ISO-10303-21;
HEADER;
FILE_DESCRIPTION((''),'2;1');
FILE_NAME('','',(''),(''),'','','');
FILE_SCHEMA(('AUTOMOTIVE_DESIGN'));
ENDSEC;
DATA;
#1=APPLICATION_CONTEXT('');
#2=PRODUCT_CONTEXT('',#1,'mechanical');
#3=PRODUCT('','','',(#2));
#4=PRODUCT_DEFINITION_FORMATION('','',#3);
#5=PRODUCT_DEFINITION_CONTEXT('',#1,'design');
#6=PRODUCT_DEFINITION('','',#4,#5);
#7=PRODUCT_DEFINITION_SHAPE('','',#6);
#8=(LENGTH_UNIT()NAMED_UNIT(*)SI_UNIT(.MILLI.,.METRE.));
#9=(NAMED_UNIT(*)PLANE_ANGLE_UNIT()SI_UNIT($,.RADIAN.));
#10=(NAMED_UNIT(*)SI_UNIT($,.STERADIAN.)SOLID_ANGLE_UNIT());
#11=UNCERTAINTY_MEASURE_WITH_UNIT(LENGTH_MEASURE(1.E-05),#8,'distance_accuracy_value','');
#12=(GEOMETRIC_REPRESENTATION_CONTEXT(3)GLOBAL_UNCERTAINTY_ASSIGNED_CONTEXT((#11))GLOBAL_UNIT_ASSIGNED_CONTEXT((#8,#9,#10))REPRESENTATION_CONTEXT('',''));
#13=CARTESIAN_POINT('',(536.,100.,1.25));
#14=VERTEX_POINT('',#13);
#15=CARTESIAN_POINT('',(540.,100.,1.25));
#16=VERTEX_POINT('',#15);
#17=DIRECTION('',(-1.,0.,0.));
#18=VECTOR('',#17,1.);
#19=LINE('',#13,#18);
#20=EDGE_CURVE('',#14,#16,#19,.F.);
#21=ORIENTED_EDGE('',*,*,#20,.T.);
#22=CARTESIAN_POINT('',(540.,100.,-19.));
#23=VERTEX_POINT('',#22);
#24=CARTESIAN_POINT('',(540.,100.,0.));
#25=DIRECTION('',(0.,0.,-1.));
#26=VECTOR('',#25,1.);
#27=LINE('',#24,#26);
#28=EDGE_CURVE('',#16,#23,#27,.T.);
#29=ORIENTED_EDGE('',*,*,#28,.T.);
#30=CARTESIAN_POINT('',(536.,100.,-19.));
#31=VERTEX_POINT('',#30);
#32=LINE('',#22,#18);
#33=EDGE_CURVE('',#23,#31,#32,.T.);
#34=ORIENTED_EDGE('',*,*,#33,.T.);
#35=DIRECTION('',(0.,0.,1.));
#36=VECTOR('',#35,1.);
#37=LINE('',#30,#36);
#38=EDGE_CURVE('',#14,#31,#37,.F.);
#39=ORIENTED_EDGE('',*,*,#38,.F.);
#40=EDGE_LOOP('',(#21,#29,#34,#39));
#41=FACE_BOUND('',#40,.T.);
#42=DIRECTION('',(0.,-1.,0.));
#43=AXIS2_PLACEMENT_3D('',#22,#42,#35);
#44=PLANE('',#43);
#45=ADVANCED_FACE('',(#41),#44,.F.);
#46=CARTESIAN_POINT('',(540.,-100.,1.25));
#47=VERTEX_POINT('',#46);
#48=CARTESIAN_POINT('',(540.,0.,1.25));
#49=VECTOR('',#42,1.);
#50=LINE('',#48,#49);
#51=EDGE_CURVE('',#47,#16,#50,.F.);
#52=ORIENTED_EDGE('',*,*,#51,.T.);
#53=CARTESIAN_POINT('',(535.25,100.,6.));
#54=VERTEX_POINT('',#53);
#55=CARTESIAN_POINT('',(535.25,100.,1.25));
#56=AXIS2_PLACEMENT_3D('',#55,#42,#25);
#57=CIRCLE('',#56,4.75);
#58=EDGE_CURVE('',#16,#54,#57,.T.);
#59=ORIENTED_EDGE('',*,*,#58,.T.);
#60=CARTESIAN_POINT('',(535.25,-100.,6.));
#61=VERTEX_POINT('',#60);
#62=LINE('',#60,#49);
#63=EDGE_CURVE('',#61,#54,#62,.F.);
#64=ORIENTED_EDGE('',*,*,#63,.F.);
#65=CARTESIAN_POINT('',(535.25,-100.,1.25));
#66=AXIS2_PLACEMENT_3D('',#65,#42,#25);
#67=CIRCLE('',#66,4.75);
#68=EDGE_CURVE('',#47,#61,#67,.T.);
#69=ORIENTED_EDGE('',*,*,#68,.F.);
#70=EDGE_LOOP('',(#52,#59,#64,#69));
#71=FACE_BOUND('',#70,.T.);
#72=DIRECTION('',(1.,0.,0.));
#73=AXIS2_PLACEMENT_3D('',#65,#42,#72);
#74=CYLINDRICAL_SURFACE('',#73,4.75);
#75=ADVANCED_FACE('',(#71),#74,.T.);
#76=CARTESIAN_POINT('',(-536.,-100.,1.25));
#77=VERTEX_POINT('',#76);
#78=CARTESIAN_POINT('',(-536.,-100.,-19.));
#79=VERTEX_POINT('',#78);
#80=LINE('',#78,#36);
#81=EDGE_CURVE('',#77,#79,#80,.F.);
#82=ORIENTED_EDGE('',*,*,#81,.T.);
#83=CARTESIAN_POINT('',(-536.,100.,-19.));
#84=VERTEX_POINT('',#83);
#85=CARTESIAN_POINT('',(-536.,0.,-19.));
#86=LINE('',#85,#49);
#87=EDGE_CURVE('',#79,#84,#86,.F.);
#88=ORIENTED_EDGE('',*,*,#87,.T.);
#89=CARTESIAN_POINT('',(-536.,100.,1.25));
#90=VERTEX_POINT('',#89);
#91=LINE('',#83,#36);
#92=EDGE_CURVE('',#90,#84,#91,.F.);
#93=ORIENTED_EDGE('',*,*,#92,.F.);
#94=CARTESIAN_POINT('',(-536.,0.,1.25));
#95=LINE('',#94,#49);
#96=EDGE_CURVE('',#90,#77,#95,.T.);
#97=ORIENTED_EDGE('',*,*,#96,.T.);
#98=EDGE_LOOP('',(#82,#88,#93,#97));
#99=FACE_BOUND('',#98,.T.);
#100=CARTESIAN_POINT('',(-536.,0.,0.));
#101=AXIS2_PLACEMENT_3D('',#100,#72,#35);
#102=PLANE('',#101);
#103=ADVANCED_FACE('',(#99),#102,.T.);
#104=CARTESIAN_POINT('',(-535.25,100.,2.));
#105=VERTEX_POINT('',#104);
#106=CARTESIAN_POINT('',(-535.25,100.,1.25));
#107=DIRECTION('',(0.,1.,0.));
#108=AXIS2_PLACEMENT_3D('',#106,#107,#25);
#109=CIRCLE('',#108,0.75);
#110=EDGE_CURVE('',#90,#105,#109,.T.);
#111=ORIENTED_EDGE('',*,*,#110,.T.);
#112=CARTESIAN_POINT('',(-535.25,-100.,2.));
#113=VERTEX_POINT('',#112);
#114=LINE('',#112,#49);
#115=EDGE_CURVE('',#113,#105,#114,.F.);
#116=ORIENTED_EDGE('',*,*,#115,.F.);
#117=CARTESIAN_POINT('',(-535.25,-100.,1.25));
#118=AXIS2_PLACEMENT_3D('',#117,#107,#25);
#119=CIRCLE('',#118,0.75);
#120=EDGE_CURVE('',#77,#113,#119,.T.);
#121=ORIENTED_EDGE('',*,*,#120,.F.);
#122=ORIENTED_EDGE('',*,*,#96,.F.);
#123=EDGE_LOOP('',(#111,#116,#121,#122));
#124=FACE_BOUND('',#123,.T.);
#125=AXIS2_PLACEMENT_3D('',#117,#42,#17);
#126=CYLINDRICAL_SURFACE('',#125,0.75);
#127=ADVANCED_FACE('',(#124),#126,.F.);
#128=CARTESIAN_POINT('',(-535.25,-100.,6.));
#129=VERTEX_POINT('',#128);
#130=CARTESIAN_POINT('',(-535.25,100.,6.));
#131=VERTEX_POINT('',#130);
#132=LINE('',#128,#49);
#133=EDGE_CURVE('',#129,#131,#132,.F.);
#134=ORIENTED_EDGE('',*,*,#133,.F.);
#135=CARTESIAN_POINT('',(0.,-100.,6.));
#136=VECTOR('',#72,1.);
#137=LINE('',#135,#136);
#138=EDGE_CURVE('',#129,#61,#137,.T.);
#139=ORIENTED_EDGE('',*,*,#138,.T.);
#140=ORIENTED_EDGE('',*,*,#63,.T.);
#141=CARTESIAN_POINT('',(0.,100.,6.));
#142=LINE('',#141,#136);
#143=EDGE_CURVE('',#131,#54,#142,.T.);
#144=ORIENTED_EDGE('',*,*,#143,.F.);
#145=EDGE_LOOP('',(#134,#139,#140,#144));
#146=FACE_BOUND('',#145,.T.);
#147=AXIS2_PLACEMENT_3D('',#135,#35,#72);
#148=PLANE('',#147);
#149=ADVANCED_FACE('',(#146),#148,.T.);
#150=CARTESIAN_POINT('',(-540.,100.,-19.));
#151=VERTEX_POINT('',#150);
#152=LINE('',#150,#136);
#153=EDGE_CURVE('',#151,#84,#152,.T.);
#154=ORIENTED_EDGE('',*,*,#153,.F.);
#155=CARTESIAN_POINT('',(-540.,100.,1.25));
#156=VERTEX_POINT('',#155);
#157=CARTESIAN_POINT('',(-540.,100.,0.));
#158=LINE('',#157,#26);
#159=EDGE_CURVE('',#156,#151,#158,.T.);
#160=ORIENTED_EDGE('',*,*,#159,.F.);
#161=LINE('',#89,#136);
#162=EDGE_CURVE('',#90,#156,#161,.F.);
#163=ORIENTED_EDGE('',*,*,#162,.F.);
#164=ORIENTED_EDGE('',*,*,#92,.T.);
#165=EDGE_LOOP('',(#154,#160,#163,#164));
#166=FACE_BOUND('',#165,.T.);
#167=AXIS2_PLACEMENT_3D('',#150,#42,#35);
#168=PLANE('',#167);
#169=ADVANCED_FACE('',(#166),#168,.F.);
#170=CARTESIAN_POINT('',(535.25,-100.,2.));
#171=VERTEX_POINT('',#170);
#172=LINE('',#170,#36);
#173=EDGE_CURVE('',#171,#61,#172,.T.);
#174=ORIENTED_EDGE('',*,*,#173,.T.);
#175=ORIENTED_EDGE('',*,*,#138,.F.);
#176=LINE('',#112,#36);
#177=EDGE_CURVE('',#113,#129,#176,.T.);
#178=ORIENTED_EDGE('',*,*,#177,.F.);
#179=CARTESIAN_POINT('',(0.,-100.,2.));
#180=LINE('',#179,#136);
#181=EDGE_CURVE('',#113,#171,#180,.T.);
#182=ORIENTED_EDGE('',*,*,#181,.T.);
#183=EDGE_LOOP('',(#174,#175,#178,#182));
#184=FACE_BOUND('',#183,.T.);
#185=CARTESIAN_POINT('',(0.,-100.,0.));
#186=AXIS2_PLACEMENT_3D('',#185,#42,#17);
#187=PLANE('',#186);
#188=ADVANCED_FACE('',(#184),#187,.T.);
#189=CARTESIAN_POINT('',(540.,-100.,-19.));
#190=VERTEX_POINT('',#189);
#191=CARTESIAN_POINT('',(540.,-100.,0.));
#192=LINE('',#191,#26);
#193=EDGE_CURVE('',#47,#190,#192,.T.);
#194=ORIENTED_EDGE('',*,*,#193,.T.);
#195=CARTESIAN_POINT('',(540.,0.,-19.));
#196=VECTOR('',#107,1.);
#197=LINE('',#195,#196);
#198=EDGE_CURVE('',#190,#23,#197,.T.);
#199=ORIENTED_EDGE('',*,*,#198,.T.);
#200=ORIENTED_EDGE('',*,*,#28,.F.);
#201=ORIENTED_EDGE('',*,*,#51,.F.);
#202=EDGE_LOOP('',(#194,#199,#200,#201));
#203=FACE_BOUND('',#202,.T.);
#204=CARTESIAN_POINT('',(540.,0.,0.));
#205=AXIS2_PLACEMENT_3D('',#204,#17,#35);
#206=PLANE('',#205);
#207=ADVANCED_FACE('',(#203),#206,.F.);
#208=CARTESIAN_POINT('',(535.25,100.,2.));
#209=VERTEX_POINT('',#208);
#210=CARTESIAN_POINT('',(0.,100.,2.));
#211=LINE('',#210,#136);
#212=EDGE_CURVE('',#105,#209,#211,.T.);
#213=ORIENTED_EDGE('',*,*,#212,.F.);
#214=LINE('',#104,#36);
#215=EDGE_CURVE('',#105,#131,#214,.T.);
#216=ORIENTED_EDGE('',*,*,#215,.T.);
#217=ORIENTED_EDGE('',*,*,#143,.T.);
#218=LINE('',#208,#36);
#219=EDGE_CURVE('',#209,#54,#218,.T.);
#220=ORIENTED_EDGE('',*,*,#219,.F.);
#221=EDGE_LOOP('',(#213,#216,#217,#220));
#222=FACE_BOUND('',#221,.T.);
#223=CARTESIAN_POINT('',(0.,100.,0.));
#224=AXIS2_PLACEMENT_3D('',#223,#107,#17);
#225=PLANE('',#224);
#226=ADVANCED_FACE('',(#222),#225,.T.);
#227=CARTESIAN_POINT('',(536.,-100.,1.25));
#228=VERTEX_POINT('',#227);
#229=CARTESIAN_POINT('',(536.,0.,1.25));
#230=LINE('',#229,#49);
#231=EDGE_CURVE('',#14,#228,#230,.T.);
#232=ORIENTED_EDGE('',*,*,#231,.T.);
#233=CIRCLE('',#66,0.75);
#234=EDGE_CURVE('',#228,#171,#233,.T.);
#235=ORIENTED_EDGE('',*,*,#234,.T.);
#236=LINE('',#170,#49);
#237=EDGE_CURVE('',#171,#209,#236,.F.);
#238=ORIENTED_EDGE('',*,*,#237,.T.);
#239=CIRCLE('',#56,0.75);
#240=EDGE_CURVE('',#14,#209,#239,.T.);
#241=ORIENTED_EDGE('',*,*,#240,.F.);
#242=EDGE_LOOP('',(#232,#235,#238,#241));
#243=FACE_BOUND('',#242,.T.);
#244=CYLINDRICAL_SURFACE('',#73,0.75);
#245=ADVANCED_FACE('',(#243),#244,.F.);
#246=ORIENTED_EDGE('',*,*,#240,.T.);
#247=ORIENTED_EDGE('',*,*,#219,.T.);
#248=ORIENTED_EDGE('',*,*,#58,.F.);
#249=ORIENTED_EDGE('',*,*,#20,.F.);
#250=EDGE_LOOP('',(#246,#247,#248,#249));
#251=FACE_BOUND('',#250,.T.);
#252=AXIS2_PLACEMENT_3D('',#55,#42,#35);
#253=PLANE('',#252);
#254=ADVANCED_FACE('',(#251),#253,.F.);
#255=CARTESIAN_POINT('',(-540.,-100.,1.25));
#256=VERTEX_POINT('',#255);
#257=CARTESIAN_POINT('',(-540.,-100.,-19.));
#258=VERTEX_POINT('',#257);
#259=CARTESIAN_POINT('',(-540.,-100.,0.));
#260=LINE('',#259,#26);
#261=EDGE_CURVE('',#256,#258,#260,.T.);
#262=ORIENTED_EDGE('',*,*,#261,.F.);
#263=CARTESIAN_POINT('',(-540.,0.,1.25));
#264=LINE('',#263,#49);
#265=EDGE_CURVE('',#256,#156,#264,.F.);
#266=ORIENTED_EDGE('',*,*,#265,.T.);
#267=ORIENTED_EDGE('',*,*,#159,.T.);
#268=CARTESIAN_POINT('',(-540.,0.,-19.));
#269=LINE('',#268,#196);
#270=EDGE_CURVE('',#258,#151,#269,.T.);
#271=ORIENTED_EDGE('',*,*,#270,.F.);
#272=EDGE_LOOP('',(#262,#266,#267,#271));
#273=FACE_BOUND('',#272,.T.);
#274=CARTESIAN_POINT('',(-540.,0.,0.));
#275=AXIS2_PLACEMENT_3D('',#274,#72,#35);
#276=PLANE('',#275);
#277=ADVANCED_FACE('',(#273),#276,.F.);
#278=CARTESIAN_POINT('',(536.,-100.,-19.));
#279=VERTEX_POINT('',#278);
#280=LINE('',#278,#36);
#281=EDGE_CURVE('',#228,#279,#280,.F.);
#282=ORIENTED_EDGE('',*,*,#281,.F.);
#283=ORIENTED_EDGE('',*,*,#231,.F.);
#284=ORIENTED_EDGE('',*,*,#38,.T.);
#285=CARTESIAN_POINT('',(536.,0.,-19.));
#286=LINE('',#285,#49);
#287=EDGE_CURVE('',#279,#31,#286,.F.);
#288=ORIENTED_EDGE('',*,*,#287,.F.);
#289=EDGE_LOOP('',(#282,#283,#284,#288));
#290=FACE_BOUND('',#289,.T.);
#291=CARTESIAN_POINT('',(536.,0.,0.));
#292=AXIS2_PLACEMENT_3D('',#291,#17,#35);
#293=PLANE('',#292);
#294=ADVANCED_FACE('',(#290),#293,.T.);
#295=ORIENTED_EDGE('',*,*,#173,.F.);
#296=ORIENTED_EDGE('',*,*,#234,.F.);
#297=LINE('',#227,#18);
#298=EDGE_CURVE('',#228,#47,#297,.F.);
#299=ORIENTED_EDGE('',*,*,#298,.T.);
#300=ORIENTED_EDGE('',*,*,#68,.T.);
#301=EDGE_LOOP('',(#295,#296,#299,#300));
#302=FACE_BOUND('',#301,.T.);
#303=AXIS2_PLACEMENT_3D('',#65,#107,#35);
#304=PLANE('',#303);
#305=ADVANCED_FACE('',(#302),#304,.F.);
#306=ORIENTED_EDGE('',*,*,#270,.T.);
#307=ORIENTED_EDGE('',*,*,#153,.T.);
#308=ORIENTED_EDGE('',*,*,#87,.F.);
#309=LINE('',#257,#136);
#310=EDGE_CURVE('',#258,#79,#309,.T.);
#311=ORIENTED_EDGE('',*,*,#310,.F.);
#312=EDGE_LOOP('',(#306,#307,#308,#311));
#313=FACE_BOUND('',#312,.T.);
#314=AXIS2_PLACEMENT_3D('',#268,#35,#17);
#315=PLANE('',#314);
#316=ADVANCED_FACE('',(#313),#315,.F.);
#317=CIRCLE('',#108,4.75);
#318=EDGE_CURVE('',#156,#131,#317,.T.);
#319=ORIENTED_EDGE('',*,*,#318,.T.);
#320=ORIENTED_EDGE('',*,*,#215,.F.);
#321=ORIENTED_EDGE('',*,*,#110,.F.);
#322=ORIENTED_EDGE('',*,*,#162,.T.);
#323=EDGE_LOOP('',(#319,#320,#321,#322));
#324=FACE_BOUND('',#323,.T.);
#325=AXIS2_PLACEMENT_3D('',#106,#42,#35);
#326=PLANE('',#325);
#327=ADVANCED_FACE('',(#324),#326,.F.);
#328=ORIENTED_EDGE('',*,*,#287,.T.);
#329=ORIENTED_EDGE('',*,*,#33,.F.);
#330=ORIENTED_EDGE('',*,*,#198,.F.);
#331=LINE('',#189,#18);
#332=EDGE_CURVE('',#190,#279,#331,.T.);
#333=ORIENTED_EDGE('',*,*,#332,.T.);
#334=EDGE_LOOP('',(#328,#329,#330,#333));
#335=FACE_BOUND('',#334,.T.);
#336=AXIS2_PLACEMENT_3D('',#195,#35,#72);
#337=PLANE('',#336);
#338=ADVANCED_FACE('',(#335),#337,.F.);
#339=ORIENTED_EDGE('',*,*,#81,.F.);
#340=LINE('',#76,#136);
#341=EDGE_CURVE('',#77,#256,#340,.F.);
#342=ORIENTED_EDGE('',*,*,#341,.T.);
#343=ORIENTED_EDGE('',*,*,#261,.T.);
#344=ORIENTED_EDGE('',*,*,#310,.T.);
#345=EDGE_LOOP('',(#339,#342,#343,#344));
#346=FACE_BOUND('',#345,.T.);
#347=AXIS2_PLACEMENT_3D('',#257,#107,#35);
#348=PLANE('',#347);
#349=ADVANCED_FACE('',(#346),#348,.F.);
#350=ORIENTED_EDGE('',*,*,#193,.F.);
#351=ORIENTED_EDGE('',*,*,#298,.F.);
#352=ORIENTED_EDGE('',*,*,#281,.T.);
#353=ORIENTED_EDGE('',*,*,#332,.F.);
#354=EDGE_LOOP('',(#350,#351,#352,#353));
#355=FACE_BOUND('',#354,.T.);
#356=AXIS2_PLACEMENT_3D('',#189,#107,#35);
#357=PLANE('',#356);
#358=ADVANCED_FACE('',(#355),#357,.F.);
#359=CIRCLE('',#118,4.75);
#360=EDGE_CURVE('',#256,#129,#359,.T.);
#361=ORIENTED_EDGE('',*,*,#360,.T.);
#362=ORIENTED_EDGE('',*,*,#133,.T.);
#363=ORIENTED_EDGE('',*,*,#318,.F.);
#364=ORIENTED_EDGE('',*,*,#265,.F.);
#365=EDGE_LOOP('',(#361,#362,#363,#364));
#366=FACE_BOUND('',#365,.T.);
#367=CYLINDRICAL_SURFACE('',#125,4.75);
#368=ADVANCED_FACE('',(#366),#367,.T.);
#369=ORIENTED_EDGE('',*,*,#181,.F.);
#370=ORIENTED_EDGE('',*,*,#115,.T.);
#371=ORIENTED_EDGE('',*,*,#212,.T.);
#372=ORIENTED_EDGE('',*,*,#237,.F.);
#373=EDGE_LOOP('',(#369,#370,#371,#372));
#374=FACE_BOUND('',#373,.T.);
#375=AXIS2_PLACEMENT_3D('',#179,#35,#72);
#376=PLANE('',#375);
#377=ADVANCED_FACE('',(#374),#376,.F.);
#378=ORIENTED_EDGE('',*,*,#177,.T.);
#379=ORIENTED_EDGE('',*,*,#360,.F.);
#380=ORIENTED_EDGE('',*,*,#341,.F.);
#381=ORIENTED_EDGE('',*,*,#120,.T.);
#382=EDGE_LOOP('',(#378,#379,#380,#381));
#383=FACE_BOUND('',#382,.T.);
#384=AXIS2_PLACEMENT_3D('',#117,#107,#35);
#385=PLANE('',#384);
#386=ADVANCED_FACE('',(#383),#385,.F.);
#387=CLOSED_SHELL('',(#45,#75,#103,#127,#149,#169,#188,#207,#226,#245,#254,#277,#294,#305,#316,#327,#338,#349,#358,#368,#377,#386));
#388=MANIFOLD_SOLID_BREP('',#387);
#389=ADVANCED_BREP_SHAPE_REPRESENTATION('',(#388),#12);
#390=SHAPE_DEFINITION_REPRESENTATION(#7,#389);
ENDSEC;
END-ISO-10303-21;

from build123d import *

# Parameters (mm, degrees)
SKETCH_1_W                       = 540
SKETCH_1_H                       = 4
SM_BASE_FLANGE_1_DEPTH           = 100
SM_EDGE_FLANGE_1_STRIP_W         = 17.5
SM_EDGE_FLANGE_1_STRIP_H         = 4
SM_EDGE_FLANGE_1_STRIP_CUT_DEPTH = 100
SM_EDGE_FLANGE_1_DEPTH           = 100


# Sheet-metal steps are written as plain solids
with BuildPart() as part:
    # Sketch 1 → Базовая кромка1 (new body)
    with BuildSketch(Plane(origin=(0, 0, 0), x_dir=(1, 0, 0), z_dir=(0, 1, 0))):
        with Locations((270, -4)):
            Rectangle(SKETCH_1_W, SKETCH_1_H)
    extrude(amount=-SM_BASE_FLANGE_1_DEPTH)

    # Ребро-кромка1 strip (across the edge) → Ребро-кромка1 strip cut (cut)
    with BuildSketch(Plane(origin=(540, 0, 2), x_dir=(-1, 0, 0), z_dir=(0, -1, 0))):
        with Locations((-4, -2)):
            Rectangle(SM_EDGE_FLANGE_1_STRIP_W, SM_EDGE_FLANGE_1_STRIP_H)
    extrude(amount=SM_EDGE_FLANGE_1_STRIP_CUT_DEPTH, mode=Mode.SUBTRACT)

    # Ребро-кромка1 section (across the edge) → Ребро-кромка1 (add)
    with BuildSketch(Plane(origin=(540, 0, 2), x_dir=(-1, 0, 0), z_dir=(0, -1, 0))):
        with BuildLine():
            Line((0, 0.75), (0, 21))
            Line((0, 21), (4, 21))
            Line((4, 21), (4, 0.75))
            ThreePointArc((4, 0.75), (4.219669914, 0.219669914), (4.75, 0))
            Line((4.75, 0), (4.75, -4))
            ThreePointArc((4.75, -4), (1.391242789, -2.608757211), (0, 0.75))
        make_face()
    extrude(amount=SM_EDGE_FLANGE_1_DEPTH)

    # Зеркальное отражение1: part across plane


with BuildPart() as part_1:
    add(part.part)
    add(part.part.mirror(Plane(origin=(0, 0, 0), x_dir=(0, 0, 1), z_dir=(0, -1, 0))))

    # Зеркальное отражение2: part across face


with BuildPart() as part_2:
    add(part_1.part)
    add(part_1.part.mirror(Plane(origin=(0, 0, 4), x_dir=(0, 0, 1), z_dir=(-1, 0, 0))))


solid = part_2.part
